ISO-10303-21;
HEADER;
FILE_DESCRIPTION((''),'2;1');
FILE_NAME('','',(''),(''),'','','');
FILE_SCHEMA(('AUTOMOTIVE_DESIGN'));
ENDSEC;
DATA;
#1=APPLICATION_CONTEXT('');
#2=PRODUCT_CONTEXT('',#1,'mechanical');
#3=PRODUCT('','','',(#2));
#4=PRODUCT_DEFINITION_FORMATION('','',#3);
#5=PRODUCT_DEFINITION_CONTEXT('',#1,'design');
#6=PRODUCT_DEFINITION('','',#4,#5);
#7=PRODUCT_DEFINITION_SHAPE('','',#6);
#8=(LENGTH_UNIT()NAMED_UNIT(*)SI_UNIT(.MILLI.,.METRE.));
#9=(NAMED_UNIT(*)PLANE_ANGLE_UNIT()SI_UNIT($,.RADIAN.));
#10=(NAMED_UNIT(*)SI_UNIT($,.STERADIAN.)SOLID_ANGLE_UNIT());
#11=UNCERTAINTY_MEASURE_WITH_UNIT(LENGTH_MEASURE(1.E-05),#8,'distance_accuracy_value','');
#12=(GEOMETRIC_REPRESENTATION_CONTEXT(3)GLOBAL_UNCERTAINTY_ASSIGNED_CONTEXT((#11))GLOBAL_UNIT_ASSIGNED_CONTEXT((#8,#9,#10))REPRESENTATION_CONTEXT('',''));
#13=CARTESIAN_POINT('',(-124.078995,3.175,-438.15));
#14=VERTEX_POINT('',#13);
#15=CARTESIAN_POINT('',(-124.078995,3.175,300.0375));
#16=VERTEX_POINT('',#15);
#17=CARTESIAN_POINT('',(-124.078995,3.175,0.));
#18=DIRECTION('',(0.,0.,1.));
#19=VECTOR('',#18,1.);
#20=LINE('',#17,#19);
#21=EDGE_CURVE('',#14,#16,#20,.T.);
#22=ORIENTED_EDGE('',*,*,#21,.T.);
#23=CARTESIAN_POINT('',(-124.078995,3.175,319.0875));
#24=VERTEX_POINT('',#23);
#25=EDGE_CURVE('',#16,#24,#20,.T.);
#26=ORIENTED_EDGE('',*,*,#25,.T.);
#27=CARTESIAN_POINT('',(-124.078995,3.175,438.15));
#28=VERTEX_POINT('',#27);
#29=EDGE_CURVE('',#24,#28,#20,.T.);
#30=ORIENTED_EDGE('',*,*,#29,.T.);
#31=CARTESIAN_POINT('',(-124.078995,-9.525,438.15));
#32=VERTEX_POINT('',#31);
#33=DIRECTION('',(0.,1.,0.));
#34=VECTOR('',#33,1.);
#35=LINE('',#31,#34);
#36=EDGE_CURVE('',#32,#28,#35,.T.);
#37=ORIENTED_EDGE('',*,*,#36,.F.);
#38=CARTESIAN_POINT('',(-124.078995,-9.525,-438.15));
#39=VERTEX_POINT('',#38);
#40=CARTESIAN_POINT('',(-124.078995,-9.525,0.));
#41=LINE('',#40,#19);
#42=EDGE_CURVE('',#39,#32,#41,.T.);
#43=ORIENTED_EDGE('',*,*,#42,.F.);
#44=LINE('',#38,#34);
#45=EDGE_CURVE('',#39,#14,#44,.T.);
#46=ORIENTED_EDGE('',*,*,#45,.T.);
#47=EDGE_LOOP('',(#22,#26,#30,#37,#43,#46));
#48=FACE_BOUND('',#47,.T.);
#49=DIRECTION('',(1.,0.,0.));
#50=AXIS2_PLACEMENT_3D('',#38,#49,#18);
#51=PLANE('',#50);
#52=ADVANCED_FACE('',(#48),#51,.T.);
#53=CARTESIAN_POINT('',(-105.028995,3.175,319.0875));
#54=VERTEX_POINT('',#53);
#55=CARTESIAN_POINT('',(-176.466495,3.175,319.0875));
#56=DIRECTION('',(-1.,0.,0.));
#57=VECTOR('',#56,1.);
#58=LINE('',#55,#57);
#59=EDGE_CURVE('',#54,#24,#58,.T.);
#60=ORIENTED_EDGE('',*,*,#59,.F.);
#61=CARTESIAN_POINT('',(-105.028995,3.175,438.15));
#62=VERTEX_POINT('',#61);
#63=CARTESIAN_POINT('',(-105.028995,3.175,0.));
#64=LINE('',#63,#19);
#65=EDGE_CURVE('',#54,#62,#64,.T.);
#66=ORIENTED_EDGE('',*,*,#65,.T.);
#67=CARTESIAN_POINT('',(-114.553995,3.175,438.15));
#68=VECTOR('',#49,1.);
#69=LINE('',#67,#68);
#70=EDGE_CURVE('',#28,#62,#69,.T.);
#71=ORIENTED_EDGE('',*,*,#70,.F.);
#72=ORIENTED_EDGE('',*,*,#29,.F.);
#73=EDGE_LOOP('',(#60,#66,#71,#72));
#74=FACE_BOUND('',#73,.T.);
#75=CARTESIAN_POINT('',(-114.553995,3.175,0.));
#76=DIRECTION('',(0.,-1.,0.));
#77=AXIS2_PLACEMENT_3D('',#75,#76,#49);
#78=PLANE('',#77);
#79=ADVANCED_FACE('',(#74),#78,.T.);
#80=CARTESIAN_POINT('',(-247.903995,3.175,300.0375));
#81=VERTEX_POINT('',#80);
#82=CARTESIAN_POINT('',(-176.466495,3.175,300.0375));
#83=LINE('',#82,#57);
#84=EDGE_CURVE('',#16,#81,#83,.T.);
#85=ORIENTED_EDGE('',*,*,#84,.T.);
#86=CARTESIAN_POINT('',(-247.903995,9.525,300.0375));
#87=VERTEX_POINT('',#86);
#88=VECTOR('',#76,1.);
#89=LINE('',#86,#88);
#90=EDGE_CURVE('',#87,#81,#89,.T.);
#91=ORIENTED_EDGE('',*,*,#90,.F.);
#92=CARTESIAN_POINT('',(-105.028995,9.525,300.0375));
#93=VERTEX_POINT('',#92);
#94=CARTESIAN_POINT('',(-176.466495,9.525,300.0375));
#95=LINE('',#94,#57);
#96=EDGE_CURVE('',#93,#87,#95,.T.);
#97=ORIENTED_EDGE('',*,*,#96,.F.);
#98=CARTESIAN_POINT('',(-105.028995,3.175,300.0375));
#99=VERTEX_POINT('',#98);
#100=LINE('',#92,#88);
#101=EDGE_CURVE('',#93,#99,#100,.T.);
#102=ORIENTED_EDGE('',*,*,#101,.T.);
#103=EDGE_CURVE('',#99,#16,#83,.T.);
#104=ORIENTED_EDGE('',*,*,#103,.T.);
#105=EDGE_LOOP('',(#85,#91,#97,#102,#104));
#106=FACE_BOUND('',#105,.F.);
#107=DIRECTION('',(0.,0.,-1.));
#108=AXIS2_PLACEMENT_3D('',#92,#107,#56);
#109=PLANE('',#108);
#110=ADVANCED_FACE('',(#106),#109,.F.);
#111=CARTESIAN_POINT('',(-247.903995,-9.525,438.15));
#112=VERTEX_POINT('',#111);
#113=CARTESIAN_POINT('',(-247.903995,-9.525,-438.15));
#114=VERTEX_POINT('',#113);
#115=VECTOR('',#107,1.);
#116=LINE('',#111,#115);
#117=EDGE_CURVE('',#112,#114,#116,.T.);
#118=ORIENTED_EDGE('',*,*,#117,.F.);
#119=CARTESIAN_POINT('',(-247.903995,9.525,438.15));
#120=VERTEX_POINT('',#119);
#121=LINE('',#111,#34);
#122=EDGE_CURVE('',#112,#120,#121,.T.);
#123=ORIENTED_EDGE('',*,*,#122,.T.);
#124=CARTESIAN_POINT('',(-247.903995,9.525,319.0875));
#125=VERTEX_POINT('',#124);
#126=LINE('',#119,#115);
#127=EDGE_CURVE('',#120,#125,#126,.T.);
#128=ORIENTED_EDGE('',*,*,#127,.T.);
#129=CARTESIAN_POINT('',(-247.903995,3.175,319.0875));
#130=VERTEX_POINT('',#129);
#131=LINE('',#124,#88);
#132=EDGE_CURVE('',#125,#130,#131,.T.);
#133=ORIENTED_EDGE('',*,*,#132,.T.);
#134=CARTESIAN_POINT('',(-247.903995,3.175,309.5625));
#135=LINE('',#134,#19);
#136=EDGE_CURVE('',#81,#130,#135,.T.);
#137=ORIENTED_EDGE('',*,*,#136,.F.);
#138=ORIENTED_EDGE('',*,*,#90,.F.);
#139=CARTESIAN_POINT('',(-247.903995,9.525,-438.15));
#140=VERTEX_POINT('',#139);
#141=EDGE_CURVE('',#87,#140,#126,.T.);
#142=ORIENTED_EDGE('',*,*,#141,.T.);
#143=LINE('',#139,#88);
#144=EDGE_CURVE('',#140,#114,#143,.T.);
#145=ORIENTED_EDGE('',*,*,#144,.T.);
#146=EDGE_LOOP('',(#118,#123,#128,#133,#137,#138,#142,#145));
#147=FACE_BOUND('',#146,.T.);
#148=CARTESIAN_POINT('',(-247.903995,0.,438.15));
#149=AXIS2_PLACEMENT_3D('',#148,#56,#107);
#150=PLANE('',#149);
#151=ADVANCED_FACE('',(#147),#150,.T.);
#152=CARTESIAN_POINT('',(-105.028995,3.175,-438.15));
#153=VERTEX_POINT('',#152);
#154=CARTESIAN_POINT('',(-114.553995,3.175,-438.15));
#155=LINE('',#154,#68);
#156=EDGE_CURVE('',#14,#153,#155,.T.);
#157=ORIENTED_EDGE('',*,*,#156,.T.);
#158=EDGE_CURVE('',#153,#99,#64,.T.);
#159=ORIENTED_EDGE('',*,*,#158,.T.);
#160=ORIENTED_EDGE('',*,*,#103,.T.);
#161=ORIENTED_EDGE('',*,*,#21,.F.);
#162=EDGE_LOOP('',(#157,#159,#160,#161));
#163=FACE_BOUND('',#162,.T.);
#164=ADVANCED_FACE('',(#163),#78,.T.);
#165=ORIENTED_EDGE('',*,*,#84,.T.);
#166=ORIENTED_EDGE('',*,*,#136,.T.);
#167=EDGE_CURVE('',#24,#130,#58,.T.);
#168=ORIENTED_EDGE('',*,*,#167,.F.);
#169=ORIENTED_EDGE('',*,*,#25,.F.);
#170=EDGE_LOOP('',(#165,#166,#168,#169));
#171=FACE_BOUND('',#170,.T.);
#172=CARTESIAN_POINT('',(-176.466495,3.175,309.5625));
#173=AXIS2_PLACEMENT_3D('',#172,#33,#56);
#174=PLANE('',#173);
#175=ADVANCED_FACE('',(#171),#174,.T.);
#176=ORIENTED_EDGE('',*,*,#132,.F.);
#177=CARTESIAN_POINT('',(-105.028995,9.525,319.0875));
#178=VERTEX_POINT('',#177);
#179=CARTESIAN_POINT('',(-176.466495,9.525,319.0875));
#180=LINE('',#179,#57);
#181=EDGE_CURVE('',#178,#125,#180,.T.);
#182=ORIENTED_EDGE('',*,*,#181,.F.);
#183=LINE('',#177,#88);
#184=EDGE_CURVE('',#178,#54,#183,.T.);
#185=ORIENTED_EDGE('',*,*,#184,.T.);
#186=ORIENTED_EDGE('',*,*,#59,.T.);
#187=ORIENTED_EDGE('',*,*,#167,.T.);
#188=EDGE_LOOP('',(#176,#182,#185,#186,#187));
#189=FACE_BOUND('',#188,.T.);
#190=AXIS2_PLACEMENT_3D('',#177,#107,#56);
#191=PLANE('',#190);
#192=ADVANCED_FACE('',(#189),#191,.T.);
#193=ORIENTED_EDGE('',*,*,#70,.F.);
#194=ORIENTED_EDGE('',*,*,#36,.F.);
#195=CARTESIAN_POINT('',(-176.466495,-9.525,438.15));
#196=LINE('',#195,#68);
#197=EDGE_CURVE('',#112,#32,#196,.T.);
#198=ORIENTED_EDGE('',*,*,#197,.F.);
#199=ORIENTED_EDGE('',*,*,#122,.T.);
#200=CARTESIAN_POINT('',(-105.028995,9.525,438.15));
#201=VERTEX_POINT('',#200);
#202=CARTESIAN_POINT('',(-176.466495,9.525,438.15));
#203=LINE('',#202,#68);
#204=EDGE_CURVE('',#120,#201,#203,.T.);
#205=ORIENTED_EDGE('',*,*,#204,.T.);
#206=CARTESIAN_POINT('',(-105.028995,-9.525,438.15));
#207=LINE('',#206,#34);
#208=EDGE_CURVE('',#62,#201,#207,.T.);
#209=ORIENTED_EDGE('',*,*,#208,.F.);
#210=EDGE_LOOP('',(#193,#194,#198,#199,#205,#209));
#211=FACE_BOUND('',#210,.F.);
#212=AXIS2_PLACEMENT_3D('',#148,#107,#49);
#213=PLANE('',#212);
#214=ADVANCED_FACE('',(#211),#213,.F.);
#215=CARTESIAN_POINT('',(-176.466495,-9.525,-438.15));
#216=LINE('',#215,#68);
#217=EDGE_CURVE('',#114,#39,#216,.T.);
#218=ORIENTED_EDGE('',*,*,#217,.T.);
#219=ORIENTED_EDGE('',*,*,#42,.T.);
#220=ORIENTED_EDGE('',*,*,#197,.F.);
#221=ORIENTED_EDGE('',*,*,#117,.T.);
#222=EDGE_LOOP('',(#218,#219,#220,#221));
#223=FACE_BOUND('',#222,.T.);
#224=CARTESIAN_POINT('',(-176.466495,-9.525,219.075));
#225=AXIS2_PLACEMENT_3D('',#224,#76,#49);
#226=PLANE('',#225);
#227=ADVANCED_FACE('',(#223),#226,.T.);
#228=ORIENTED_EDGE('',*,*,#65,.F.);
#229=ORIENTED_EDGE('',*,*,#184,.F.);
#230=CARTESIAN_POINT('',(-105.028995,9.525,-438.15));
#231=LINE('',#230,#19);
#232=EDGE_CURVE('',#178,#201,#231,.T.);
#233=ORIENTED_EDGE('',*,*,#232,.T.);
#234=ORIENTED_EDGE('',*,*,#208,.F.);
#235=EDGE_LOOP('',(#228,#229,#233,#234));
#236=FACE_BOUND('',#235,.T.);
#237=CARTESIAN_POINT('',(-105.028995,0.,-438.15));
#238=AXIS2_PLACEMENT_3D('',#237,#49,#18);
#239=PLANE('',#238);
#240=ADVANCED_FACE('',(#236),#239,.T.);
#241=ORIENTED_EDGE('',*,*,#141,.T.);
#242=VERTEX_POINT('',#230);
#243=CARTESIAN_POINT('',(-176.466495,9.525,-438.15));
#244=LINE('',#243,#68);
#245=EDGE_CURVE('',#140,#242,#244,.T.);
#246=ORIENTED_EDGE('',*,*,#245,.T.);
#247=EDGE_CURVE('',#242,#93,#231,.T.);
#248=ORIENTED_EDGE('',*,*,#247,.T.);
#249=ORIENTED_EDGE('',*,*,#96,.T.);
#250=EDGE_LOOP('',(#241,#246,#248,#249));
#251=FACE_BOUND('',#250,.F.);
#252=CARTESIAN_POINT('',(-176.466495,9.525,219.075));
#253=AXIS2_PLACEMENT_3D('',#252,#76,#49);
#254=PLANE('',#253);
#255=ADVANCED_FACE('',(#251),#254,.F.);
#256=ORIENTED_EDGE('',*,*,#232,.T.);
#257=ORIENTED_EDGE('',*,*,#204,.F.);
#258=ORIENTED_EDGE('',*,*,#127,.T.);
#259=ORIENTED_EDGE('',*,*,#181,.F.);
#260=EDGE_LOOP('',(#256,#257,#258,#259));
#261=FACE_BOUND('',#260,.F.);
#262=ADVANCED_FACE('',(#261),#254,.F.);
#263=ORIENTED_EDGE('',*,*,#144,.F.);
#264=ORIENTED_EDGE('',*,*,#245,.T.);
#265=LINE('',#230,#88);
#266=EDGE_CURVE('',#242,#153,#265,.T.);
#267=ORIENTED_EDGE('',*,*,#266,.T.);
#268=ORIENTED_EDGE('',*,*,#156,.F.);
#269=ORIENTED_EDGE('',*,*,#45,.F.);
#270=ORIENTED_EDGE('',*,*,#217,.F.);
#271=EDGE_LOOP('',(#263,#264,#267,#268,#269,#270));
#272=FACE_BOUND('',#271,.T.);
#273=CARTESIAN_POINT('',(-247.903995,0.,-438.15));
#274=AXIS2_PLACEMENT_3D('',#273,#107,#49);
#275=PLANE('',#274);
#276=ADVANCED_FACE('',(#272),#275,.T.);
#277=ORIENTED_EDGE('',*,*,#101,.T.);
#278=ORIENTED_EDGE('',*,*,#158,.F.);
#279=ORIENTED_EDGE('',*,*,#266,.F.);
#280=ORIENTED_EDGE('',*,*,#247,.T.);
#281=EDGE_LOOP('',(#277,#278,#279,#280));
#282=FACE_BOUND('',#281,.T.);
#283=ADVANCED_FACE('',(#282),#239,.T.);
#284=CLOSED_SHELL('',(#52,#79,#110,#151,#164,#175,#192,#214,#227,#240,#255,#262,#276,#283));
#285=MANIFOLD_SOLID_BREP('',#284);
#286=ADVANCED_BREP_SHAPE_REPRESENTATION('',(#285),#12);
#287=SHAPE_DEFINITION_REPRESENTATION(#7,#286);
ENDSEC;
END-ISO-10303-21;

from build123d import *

# Parameters (mm, degrees)
F0_W     = 142.875
F0_H     = 438.15
F1_DEPTH = 9.525
F2_W     = 142.875
F2_H     = 19.05
F3_DEPTH = 6.35
F4_W     = 19.05
F4_H     = 876.3
F5_DEPTH = 12.7


# Not quite as in the source:
# - a feature names something its author has since deleted; it is built from what else it names


with BuildPart() as f1:
    # F0 (on Front) → F1 (new body, symmetric)
    with BuildSketch(Plane.XZ):
        with Locations((-176.4664953259, 219.075)):
            Rectangle(F0_W, F0_H)
        with Locations((-176.4664953259, -219.075)):
            Rectangle(F0_W, F0_H)
    extrude(amount=F1_DEPTH, both=True)

    # F2 (on face) → F3 (cut)
    with BuildSketch(Plane(origin=(0, 9.525, 0), x_dir=(-1, 0, 0), z_dir=(0, 1, 0))):
        with Locations((176.4664953259, 309.5625)):
            Rectangle(F2_W, F2_H)
    extrude(amount=-F3_DEPTH, mode=Mode.SUBTRACT)

    # F4 (on face) → F5 (cut)
    with BuildSketch(Plane.XZ.offset(9.525)):
        with Locations((-114.5539953259, 0)):
            Rectangle(F4_W, F4_H)
    extrude(amount=-F5_DEPTH, mode=Mode.SUBTRACT)


solid = f1.part
